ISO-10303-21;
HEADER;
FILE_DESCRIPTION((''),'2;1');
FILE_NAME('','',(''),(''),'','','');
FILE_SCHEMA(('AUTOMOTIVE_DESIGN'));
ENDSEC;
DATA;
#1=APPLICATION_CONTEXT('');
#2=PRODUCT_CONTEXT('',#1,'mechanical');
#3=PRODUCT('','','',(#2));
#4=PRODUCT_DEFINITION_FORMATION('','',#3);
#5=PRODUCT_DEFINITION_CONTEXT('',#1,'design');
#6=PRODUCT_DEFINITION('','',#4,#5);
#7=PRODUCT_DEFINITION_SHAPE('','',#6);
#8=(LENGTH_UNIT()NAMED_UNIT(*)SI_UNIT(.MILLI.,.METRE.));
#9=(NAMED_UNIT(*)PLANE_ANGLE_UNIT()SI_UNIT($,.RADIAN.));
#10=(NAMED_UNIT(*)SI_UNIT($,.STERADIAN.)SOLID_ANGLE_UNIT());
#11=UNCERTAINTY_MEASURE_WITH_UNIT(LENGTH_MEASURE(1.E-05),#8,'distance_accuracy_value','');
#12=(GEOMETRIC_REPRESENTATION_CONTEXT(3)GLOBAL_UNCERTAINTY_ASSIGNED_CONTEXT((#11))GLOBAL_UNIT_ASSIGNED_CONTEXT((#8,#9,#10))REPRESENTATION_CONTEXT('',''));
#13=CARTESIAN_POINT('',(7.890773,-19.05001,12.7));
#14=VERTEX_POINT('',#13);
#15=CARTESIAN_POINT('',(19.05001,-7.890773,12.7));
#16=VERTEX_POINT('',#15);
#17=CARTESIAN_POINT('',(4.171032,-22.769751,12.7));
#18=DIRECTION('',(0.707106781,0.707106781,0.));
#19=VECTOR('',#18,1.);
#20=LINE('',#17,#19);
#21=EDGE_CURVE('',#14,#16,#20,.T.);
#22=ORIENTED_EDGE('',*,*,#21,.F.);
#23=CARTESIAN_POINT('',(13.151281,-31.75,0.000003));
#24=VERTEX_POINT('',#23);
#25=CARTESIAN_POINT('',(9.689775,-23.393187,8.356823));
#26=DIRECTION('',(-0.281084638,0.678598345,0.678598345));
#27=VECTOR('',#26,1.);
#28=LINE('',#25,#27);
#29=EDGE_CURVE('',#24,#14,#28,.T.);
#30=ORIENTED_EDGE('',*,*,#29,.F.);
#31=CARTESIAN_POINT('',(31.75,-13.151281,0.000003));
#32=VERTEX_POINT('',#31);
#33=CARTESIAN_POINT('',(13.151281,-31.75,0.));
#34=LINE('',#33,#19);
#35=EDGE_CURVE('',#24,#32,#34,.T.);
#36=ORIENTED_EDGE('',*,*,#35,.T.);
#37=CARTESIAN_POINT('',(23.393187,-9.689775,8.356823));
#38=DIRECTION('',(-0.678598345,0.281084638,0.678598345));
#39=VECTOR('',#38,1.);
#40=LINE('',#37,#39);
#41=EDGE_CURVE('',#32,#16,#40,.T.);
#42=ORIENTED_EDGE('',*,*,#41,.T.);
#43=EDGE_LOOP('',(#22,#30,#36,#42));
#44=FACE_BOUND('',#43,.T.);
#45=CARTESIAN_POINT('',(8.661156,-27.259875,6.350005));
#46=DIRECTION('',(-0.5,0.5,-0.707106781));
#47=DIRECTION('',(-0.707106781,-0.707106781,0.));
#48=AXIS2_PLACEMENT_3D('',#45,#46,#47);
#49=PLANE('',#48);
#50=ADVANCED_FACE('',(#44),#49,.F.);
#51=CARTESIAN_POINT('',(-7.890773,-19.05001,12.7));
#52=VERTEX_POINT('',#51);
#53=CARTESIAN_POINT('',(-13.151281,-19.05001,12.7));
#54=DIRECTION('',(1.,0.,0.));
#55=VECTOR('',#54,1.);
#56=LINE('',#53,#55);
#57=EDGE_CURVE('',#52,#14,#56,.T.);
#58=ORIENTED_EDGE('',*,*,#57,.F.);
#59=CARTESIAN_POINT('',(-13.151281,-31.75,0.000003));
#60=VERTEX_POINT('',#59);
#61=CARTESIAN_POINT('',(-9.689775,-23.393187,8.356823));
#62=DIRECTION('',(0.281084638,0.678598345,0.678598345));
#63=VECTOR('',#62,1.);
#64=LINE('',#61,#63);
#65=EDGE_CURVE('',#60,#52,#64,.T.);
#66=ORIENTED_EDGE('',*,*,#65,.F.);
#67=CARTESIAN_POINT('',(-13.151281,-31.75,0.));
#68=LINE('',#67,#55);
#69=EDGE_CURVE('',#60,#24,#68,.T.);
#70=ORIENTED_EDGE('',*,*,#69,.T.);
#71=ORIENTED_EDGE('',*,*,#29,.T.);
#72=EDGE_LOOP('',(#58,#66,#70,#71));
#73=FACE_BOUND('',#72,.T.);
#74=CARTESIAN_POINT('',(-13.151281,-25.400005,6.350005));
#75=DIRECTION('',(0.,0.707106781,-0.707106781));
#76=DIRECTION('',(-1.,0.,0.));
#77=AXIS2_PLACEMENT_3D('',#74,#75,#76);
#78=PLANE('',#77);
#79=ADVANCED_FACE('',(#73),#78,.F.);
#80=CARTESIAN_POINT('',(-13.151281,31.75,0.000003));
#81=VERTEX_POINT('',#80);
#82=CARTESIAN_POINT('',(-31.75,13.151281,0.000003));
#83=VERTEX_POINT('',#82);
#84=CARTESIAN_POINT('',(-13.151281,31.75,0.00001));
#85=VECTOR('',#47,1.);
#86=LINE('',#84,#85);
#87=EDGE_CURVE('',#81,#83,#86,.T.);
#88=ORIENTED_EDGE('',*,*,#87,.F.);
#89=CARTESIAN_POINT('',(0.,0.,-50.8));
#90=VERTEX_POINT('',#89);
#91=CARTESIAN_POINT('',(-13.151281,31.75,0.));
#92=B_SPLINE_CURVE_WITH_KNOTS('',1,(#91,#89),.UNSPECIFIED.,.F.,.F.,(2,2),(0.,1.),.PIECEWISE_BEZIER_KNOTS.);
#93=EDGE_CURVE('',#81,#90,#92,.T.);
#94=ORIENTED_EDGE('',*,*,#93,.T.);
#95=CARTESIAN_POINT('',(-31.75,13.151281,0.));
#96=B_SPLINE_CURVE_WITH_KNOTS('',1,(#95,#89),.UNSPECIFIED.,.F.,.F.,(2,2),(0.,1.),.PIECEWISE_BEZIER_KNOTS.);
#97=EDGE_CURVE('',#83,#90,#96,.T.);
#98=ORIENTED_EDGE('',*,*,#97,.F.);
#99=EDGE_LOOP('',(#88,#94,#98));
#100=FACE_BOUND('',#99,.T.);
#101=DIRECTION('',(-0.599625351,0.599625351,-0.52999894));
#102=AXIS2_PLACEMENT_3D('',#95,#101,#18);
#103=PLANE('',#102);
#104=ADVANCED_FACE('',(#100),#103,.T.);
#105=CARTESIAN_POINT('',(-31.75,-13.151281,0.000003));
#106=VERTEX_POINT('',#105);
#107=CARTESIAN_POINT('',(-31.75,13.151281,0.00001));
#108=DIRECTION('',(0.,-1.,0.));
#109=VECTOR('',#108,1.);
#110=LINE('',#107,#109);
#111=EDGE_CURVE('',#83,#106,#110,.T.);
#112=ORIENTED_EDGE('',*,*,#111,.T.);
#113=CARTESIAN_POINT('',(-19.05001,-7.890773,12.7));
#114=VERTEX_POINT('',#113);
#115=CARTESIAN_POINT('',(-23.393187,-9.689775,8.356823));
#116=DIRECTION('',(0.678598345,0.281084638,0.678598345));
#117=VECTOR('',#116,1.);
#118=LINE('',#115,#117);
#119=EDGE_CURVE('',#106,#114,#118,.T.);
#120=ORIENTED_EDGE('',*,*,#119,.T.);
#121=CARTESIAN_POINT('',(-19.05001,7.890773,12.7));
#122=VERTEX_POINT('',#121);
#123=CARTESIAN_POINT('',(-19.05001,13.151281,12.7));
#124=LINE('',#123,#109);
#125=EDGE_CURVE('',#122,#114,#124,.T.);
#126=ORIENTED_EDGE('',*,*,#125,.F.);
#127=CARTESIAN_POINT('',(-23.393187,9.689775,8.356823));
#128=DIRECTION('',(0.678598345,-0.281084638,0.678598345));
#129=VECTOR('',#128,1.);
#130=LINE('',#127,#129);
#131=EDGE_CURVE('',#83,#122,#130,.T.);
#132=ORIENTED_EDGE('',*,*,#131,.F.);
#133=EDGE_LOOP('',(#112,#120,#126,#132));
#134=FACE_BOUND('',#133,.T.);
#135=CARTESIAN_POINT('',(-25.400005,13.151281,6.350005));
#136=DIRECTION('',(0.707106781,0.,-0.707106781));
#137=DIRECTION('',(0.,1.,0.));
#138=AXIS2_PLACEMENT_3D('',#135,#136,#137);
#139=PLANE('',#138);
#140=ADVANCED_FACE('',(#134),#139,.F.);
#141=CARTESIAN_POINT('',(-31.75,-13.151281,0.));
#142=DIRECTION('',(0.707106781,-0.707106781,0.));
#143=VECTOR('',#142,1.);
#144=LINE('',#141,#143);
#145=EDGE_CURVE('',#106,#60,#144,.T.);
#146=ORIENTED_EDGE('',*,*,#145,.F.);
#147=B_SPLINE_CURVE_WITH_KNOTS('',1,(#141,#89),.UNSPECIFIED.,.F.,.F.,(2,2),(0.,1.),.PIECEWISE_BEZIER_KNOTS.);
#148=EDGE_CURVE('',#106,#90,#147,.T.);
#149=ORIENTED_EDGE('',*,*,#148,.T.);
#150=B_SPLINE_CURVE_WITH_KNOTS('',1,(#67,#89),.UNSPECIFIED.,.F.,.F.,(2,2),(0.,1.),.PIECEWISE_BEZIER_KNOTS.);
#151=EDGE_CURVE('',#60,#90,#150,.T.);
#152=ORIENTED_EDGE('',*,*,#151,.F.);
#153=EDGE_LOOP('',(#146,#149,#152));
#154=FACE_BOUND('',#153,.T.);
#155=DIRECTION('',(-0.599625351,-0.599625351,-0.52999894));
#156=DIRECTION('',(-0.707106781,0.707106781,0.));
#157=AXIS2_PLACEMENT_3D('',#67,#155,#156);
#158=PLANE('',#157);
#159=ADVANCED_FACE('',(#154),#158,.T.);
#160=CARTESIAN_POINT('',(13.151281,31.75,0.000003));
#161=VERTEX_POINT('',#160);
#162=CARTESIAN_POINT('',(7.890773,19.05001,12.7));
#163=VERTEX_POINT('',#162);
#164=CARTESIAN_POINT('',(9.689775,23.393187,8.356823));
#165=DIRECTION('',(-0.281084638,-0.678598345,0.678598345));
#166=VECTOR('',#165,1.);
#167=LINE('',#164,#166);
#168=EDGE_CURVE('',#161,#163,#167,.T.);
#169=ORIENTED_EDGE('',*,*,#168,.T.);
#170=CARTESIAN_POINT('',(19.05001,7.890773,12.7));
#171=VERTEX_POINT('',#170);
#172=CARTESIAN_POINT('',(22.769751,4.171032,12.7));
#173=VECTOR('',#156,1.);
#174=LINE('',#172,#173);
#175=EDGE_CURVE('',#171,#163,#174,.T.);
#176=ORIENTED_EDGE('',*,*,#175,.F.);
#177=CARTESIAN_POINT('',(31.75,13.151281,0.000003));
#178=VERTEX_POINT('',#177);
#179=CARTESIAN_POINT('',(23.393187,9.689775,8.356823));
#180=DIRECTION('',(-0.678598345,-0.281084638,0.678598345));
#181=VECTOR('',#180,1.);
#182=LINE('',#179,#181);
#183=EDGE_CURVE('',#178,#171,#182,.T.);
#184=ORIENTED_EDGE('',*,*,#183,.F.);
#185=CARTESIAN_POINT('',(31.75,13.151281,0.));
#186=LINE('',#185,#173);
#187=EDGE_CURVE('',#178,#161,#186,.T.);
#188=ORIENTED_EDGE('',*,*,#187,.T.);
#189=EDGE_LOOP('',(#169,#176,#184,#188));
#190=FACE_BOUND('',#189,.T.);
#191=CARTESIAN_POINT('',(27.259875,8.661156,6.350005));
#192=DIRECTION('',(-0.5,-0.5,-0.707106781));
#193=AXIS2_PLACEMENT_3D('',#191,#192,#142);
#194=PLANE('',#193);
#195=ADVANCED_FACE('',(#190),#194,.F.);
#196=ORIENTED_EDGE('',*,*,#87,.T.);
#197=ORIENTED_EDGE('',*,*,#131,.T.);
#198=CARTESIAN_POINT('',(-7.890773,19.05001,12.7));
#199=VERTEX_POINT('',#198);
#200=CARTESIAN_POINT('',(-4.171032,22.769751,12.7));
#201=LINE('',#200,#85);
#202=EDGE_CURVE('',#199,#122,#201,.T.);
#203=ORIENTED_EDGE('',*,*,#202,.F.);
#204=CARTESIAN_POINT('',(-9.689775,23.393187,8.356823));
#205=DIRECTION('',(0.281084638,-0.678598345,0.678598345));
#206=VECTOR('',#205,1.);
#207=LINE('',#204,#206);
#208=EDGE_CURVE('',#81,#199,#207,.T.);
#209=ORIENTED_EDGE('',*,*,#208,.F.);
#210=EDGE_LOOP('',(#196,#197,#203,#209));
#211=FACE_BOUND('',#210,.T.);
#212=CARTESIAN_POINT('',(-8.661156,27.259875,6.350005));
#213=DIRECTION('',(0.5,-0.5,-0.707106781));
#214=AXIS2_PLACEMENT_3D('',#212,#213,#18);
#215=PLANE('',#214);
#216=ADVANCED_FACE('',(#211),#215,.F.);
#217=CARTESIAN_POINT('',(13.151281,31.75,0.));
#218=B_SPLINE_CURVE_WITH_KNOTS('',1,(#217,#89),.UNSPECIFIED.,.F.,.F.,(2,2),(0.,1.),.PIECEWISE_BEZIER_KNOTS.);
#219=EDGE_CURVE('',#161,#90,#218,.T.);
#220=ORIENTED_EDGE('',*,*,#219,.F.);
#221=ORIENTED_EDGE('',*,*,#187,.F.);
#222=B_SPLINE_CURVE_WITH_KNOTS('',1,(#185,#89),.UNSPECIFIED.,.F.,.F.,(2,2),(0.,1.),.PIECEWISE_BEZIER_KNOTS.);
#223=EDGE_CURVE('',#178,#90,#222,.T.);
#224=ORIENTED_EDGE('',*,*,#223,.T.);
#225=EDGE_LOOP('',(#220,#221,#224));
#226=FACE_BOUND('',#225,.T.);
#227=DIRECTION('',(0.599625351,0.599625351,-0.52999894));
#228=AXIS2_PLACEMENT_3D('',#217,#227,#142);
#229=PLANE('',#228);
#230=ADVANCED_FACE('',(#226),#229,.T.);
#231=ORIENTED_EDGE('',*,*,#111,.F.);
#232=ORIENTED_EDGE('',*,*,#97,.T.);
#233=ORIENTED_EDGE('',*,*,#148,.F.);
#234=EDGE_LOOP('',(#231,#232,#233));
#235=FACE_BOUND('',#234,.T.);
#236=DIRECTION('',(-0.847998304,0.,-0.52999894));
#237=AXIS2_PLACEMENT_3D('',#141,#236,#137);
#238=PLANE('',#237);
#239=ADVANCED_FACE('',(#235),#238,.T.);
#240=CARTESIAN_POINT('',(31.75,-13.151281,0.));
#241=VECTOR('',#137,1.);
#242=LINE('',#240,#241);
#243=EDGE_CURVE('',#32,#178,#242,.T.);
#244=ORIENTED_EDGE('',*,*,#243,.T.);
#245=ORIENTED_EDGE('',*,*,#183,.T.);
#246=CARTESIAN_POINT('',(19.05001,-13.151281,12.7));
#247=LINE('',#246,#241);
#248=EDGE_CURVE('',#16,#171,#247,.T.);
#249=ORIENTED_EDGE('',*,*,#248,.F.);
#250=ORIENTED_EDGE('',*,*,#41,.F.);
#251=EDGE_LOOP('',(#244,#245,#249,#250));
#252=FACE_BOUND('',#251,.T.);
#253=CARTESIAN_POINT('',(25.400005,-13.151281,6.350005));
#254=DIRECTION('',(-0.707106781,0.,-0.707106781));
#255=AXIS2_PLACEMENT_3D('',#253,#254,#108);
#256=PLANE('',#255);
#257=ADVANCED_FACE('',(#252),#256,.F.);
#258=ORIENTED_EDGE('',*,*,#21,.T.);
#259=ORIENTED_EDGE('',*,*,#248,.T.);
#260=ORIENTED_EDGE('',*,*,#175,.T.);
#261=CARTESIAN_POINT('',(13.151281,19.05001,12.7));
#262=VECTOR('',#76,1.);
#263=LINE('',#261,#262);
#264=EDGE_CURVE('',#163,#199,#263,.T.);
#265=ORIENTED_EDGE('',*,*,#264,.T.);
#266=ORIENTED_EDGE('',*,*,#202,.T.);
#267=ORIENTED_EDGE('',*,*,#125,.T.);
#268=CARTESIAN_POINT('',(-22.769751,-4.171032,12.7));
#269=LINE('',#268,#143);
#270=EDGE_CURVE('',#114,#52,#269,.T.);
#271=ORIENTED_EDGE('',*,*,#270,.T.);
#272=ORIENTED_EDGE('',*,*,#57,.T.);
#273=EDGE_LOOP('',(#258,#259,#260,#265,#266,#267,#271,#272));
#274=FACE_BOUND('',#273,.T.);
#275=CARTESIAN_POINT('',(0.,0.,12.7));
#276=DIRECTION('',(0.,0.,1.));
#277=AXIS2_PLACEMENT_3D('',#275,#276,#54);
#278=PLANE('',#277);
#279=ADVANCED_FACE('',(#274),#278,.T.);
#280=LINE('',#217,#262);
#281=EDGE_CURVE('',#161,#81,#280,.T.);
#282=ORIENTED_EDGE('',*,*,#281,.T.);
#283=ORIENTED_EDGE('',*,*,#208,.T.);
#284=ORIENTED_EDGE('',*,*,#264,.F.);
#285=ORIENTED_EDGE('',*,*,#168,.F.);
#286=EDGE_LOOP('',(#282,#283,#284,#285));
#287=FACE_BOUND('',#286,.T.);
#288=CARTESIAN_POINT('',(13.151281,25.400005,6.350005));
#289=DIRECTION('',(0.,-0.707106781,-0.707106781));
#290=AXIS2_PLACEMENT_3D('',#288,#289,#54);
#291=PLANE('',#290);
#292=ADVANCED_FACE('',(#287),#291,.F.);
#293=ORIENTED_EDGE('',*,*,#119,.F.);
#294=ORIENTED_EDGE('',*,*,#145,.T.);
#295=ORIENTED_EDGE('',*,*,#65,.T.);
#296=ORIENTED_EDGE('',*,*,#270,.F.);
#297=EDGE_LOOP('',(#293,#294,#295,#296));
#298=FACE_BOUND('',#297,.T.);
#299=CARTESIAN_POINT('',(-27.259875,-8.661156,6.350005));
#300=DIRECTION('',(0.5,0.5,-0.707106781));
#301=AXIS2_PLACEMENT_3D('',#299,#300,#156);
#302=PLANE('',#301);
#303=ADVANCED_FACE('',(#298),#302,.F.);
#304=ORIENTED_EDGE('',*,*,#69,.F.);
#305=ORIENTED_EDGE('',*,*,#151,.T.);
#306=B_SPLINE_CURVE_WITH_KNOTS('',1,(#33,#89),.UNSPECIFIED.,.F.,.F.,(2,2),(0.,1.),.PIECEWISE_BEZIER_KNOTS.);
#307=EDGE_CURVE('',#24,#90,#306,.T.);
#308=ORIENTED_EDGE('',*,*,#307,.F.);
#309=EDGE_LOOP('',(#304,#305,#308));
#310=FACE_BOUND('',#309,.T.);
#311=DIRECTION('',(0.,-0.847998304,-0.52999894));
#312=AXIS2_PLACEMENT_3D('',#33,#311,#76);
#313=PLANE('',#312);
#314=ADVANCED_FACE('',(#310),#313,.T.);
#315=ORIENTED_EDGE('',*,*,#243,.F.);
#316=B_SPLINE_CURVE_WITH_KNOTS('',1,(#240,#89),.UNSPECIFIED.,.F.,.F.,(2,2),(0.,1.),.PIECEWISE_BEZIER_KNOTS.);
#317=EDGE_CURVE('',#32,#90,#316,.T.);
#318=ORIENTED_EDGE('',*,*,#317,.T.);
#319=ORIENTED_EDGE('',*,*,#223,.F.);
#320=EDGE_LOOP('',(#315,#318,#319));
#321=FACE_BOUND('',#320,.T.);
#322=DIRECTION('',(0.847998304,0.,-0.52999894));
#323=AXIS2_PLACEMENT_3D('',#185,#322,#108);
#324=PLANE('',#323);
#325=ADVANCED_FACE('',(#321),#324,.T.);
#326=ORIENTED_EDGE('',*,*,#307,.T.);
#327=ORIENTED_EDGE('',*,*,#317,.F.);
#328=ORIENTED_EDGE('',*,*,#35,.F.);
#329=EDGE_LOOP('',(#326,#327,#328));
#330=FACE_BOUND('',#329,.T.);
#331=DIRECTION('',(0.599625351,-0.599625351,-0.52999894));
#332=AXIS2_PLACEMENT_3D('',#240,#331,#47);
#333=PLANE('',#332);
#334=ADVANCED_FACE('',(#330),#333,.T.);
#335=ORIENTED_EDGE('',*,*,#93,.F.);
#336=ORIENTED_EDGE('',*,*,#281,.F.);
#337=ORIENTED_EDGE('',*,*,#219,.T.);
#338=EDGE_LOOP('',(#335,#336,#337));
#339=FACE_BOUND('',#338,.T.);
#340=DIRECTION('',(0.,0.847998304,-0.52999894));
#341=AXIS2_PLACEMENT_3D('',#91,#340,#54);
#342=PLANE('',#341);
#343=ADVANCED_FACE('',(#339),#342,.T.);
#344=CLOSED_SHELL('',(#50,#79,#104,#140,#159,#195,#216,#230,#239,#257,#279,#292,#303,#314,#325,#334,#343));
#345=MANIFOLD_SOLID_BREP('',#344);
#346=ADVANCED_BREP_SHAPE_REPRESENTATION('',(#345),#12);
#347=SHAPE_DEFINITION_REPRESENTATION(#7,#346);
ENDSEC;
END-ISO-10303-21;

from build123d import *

# Parameters (mm, degrees)
F1_DEPTH = 12.7
F2_SIZE2 = 12.69999
F2_SIZE  = 12.69999


# Not quite as in the source:
# - a fillet or chamfer is up to 0.001 mm smaller than in the source, because OpenCascade refuses the exact size


with BuildPart() as f1:
    # F0 (on Top) → F1 (new body)
    with BuildSketch(Plane.XY):
        Polygon((-31.75, 13.1512806053), (-31.75, -13.1512806053), (-13.1512806053, -31.75), (13.1512806053, -31.75), (31.75, -13.1512806053), (31.75, 13.1512806053), (13.1512806053, 31.75), (-13.1512806053, 31.75), align=None)
    extrude(amount=F1_DEPTH)

    # F2 (size 12.7 and 12.7 in the source; OpenCascade refuses exactly that, so slightly less here)
    f2_edges = [f1.edges().sort_by_distance(p)[0] for p in [
        (-22.45064, 22.45064, 12.7),
        (-31.75, 0, 12.7),
        (-22.45064, -22.45064, 12.7),
        (0, -31.75, 12.7),
        (22.45064, -22.45064, 12.7),
        (31.75, 0, 12.7),
        (22.45064, 22.45064, 12.7),
        (0, 31.75, 12.7),
    ]]
    chamfer(f2_edges, length=F2_SIZE, length2=F2_SIZE2)

    # F1_face (on face) → F5 section 0
    with BuildSketch(Plane(origin=(0, 0, 0), x_dir=(1, 0, 0), z_dir=(0, 0, -1)), mode=Mode.PRIVATE) as f5_s0:
        Polygon((-31.75, -13.1512806053), (-13.1512806053, -31.75), (13.1512806053, -31.75), (31.75, -13.1512806053), (31.75, 13.1512806053), (13.1512806053, 31.75), (-13.1512806053, 31.75), (-31.75, 13.1512806053), align=None)
    loft([f5_s0.sketch, Vertex(0, 0, -50.8)])


solid = f1.part
